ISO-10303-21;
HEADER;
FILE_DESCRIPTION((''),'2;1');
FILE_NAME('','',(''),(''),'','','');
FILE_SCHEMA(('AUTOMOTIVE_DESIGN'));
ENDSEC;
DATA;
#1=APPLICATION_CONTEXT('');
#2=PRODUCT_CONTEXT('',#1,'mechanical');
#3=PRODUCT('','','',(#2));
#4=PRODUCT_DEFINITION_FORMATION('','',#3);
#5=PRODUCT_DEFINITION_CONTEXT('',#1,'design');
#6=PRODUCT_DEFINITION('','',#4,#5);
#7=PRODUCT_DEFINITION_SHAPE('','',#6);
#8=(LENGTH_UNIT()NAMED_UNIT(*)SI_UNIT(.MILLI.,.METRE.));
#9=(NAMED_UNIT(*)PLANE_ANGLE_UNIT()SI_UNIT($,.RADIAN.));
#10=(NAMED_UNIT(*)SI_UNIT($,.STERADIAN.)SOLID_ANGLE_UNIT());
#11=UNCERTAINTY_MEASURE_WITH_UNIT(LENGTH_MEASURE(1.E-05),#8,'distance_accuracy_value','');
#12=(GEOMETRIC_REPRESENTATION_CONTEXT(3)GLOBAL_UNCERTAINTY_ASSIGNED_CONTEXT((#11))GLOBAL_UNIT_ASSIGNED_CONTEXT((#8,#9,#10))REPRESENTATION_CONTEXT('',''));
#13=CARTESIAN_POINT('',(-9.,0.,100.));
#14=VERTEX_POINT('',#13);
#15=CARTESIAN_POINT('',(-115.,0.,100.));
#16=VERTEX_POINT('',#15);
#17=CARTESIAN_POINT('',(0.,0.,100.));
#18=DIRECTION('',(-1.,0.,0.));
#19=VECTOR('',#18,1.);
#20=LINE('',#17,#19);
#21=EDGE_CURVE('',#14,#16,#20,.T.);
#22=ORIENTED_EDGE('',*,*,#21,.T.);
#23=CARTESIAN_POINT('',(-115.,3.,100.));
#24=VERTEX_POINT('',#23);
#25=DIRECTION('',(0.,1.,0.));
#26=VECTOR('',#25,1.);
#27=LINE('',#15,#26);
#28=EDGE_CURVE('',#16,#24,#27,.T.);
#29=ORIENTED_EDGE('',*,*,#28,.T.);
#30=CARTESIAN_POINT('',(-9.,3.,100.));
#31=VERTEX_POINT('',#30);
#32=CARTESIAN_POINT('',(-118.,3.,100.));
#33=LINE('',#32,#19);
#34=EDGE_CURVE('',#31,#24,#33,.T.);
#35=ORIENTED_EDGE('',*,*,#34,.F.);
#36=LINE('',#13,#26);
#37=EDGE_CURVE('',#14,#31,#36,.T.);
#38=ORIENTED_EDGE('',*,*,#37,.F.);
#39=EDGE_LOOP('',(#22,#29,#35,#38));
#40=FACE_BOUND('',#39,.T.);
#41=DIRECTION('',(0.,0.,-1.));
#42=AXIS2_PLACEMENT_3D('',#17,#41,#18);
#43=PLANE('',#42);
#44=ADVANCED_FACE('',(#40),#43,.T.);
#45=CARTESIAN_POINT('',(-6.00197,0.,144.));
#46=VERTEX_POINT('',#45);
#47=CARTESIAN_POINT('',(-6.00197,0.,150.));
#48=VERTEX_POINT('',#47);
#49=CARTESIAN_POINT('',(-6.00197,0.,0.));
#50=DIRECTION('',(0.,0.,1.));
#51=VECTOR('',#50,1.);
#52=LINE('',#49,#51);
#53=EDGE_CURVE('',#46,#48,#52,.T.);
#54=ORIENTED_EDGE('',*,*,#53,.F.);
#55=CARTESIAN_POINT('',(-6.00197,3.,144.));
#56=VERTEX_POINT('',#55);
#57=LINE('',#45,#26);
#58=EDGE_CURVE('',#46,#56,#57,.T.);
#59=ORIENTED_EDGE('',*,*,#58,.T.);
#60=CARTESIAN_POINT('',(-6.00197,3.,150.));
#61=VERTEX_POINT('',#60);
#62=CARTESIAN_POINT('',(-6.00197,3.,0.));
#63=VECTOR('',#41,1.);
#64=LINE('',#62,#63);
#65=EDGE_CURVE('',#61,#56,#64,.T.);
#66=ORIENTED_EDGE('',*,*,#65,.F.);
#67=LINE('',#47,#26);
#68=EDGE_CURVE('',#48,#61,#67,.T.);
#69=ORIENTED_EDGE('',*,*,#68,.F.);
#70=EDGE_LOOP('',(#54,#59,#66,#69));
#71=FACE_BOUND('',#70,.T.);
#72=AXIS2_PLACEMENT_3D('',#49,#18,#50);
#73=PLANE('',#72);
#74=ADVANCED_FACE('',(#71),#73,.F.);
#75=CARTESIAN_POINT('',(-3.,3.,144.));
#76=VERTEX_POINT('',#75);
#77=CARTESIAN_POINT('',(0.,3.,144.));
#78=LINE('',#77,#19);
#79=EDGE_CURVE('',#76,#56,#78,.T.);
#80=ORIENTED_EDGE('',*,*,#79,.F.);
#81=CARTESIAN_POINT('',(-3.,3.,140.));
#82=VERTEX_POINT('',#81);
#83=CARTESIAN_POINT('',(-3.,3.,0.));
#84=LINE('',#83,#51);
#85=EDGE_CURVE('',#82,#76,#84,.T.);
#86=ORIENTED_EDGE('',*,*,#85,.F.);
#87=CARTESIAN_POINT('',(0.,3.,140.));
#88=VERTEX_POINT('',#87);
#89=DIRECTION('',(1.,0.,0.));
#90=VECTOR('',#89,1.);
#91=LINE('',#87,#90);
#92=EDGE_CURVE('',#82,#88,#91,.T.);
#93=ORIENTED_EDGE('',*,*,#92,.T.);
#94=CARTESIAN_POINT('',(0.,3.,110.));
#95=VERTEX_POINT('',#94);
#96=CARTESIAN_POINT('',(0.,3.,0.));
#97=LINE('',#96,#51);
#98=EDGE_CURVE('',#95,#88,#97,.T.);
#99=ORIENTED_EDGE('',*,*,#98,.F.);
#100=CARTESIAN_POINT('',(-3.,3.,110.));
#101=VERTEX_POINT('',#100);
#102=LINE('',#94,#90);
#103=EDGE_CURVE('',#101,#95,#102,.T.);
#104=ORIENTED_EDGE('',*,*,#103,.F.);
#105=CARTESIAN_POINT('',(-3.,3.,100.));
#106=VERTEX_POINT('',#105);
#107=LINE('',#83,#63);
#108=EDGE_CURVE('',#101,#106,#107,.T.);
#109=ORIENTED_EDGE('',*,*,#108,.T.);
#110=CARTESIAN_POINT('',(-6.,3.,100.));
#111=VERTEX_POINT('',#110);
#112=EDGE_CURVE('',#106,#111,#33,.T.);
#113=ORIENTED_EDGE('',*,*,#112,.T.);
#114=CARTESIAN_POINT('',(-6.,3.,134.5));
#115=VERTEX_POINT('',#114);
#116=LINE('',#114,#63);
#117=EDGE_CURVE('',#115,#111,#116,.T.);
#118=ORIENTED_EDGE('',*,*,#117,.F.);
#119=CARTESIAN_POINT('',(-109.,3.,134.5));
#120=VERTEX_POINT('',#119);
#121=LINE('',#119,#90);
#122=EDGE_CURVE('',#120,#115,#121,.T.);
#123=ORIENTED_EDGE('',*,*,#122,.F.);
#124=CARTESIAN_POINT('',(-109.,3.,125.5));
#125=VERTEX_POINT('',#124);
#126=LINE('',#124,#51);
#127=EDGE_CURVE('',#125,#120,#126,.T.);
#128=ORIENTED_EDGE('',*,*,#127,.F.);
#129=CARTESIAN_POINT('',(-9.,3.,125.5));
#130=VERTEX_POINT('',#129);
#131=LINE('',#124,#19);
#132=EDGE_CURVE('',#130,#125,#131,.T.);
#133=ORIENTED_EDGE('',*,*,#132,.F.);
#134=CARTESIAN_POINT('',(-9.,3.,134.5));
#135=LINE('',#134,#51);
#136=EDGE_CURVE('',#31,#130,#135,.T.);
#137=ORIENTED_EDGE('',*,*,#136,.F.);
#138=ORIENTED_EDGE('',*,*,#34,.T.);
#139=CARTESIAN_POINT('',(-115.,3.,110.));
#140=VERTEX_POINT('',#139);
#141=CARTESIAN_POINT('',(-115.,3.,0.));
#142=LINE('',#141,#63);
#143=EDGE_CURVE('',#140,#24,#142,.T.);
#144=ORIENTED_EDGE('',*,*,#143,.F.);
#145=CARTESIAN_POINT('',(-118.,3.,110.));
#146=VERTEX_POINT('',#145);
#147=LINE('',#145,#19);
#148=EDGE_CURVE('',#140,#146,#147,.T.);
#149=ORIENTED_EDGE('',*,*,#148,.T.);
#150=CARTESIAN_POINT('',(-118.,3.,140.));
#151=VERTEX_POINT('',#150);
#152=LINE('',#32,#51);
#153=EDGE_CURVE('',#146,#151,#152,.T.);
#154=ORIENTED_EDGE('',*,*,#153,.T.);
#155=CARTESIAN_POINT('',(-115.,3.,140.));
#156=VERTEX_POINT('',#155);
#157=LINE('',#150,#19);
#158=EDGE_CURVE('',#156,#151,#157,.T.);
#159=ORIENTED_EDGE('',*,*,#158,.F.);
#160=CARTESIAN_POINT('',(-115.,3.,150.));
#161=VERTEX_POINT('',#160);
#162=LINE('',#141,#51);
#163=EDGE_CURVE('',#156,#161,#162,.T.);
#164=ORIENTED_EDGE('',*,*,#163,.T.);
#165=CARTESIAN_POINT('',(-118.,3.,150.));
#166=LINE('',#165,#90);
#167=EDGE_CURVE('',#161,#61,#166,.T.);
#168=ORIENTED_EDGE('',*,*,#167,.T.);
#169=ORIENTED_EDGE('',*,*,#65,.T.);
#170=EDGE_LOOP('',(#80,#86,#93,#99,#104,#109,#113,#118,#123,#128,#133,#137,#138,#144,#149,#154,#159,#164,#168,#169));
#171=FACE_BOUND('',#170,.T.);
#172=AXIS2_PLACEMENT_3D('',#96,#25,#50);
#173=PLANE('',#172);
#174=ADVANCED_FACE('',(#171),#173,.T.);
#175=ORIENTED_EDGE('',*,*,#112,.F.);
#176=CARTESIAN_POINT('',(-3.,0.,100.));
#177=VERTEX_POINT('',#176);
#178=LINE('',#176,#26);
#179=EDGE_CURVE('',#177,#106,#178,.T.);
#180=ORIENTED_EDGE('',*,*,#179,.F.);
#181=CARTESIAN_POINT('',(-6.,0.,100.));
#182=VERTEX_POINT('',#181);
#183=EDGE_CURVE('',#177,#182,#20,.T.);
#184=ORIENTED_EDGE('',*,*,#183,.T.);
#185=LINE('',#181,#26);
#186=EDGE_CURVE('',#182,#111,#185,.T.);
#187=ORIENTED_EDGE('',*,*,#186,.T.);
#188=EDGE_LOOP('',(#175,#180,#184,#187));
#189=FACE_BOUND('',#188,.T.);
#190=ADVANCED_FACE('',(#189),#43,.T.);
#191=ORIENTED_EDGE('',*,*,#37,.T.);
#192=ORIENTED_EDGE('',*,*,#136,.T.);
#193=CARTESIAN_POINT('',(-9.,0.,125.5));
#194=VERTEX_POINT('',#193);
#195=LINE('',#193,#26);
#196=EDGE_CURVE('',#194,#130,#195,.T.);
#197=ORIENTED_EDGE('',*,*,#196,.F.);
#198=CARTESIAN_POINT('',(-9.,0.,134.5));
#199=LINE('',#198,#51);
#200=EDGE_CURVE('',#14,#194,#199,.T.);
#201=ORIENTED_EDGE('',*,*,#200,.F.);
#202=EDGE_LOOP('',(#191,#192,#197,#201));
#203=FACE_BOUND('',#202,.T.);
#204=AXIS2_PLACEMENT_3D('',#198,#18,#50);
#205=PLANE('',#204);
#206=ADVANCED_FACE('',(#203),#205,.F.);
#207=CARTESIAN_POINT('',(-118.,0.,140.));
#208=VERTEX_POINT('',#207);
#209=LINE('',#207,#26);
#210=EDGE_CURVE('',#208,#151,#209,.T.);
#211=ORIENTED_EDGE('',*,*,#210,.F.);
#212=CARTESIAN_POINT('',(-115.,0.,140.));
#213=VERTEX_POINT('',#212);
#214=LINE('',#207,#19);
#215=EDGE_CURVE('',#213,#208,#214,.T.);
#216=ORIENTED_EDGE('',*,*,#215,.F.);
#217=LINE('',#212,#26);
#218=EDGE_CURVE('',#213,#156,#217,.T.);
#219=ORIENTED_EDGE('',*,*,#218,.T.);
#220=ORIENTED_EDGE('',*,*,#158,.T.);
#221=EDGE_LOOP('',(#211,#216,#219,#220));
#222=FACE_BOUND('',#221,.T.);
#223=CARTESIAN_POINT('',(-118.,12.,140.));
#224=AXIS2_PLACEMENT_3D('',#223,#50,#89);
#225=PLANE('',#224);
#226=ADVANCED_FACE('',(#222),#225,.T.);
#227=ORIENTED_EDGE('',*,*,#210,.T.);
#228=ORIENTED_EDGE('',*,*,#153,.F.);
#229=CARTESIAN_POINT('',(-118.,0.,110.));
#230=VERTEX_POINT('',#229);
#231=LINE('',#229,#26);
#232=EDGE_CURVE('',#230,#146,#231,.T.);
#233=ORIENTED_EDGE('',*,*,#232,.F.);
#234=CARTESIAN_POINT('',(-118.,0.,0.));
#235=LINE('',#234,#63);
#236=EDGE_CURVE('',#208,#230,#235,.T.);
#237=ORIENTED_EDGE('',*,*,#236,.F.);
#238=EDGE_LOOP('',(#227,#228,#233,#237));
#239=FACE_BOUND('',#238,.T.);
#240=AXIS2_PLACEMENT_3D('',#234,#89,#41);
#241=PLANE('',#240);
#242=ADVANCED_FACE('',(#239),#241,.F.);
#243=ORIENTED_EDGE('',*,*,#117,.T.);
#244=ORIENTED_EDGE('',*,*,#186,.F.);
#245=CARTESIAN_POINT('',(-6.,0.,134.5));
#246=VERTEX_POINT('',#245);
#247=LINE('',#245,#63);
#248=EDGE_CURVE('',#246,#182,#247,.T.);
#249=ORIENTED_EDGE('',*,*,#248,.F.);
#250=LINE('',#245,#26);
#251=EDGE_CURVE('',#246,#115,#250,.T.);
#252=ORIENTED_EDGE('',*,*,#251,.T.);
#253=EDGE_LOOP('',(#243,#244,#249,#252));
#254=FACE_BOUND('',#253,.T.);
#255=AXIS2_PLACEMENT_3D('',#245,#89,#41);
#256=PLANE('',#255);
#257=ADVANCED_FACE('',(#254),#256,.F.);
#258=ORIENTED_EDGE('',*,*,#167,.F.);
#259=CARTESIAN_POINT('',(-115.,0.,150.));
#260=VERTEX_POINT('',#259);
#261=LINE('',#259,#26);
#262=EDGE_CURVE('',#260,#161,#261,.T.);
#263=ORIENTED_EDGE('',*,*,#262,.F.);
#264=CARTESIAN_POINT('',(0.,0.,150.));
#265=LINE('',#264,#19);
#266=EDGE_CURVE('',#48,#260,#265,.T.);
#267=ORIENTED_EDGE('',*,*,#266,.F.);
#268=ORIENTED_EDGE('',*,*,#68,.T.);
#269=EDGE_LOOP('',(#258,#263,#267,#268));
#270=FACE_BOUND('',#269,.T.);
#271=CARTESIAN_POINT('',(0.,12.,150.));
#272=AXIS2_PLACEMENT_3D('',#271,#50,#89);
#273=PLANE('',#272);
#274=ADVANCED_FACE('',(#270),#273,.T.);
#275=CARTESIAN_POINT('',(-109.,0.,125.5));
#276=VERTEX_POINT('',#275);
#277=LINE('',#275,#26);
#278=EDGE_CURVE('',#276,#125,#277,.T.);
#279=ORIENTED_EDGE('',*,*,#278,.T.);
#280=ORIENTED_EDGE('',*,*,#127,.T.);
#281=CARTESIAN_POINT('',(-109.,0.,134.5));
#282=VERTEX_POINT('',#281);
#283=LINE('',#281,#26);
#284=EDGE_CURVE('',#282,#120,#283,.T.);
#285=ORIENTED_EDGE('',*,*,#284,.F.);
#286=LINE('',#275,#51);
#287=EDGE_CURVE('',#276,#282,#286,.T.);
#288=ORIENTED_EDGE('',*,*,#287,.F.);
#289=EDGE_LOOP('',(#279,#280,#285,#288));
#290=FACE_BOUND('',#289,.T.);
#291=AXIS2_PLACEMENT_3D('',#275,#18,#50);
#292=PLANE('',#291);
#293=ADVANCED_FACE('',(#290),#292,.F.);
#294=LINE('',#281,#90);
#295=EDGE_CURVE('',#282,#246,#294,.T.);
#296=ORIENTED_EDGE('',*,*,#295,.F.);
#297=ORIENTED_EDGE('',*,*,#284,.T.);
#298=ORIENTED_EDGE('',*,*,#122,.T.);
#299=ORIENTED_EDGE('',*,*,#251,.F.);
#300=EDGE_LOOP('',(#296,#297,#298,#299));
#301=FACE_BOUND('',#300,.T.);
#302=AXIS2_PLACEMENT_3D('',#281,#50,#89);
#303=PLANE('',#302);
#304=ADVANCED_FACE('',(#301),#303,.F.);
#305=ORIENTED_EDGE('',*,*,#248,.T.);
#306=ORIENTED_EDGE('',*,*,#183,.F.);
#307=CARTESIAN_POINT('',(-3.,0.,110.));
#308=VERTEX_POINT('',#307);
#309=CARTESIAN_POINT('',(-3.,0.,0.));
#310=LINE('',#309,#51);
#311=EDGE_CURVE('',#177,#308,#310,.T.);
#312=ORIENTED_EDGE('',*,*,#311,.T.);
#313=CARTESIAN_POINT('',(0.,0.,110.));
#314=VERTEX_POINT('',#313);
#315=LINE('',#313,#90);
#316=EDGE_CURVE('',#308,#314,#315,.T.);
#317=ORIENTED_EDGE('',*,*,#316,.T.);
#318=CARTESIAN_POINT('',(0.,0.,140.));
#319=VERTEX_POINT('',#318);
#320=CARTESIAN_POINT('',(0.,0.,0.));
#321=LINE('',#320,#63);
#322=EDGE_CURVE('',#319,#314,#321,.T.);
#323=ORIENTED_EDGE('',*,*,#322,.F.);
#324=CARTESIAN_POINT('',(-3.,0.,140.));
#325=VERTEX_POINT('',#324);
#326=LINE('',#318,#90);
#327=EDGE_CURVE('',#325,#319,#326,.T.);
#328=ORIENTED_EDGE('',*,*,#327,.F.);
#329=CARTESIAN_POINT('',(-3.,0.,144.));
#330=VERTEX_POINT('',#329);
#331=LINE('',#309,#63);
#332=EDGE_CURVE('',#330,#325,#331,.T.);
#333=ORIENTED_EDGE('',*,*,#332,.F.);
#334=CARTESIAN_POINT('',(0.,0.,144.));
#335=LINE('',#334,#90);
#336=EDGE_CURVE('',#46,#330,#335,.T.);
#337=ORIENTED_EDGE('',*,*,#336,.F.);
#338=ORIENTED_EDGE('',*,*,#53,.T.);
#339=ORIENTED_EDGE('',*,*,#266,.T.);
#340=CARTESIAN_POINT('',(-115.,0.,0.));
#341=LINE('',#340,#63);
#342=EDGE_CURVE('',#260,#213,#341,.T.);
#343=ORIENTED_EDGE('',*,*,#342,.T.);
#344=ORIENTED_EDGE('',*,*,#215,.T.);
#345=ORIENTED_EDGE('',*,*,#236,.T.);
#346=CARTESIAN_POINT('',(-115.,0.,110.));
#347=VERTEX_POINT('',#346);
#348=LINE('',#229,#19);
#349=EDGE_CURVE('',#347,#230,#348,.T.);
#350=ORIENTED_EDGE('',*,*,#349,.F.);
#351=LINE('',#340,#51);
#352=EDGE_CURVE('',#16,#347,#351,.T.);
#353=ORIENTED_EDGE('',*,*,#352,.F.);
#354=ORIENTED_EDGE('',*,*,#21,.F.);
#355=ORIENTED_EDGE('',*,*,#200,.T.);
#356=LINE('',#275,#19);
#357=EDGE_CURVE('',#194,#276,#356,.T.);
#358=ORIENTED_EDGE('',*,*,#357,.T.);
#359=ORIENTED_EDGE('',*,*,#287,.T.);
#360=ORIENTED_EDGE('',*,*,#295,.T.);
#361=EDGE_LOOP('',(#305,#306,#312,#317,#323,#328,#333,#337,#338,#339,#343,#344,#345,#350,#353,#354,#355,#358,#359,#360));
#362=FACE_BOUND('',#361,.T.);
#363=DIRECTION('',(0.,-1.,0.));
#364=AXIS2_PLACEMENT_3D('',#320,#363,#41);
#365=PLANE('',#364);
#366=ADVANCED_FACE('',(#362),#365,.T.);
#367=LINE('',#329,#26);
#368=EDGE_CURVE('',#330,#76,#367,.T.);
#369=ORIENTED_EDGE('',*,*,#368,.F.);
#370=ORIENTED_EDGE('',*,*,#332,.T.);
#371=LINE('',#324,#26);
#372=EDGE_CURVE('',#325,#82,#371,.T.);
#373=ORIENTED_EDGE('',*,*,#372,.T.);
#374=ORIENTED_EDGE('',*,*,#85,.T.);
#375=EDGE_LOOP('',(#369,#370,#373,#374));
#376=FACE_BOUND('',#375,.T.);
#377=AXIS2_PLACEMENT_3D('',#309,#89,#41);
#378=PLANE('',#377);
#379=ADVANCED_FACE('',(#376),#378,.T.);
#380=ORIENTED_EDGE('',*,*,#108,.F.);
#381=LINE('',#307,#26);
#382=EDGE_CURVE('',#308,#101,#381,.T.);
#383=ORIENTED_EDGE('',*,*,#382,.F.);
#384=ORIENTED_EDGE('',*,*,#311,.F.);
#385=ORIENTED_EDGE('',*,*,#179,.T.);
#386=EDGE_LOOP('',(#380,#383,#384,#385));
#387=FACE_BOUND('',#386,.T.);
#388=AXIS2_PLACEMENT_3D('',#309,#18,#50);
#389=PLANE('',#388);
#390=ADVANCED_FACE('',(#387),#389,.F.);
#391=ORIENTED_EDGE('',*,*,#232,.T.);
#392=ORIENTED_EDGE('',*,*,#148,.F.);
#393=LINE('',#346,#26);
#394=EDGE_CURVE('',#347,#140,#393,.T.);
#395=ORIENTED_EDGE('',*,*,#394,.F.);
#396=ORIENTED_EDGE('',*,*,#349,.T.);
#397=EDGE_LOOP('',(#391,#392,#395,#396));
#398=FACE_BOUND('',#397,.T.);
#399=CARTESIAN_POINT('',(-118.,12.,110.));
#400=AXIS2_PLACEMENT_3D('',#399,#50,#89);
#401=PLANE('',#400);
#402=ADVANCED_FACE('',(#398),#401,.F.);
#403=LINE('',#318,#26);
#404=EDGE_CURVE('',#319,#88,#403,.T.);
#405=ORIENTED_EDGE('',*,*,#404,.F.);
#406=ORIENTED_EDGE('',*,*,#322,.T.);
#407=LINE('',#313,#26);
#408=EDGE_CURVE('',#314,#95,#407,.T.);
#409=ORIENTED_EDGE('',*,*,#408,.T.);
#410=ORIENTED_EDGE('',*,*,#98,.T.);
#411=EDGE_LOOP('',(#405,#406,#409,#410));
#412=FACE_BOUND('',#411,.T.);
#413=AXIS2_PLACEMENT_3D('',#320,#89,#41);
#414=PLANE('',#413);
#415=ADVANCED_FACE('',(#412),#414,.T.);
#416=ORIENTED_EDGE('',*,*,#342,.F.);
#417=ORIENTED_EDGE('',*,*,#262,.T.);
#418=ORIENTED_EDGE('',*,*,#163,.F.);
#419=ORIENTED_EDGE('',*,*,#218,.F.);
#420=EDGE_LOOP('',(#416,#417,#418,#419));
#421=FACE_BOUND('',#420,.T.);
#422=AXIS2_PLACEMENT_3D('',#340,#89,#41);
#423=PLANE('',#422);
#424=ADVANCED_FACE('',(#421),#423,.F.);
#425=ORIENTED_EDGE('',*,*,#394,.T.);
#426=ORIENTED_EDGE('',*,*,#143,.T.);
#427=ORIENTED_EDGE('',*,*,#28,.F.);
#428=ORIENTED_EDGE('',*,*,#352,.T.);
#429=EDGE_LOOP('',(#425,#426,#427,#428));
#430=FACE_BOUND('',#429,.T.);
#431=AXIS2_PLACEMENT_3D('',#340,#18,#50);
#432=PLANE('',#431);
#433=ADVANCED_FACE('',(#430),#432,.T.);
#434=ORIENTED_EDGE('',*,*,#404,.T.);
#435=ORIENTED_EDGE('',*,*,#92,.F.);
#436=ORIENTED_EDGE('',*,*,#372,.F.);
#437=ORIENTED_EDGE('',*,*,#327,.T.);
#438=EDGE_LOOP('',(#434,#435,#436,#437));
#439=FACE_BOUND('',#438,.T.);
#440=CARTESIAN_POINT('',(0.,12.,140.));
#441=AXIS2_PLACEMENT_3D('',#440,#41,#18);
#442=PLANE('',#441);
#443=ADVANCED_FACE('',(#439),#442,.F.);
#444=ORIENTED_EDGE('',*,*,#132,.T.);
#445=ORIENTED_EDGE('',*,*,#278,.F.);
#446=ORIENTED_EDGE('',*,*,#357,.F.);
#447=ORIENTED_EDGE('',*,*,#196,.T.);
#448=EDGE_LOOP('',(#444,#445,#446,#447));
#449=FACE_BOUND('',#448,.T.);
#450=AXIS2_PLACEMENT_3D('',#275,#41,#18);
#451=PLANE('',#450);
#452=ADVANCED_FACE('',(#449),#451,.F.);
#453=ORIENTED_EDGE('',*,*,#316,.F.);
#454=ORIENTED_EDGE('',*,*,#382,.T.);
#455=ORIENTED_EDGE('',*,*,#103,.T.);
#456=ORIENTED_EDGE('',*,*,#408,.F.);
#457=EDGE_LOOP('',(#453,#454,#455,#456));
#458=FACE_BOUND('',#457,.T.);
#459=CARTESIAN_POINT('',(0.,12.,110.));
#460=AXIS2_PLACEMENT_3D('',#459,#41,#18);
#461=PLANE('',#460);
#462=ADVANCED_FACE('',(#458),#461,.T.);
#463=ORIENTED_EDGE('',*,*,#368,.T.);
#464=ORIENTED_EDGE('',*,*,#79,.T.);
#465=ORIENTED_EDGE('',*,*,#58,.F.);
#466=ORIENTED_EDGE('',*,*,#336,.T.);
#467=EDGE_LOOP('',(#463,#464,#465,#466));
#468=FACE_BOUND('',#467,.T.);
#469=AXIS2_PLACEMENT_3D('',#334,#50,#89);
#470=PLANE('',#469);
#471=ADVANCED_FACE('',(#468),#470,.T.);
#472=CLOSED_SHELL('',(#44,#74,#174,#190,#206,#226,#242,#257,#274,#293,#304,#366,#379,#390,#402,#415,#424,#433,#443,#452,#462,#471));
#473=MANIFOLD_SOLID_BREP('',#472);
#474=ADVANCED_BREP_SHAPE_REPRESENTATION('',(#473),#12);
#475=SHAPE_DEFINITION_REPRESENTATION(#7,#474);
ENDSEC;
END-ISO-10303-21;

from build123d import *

# Parameters (mm, degrees)
LED_1_START         = 100
LED_1_OUTLINE_W     = 112
LED_1_OUTLINE_H     = 3
LED_1_DEPTH         = 25.5
LED_1_START_2       = 134.5
LED_1_2_OUTLINE_W   = 108.998029847
LED_1_2_OUTLINE_H   = 3
LED_1_2_DEPTH       = 15.5
LED_1_START_3       = 110
LED_1_3_OUTLINE_W   = 9
LED_1_3_OUTLINE_H   = 3
LED_1_3_DEPTH       = 30
LED_1_START_4       = 140
LED_1_4_OUTLINE_W   = 3.001970153
LED_1_4_OUTLINE_H   = 3
LED_1_4_DEPTH       = 4
SKETCH_1_W          = 3
SKETCH_1_H          = 34.5
CUT_EXTRUDE_1_DEPTH = 3


# Read off the part's stored shape, not the designer's step: 基体零件-LED限位板-1
with BuildPart() as part:
    # 基体零件-LED限位板-1 outline → 基体零件-LED限位板-1 (new body)
    with BuildSketch(Plane.XY.offset(LED_1_START)):
        with Locations((-59, 1.5)):
            Rectangle(LED_1_OUTLINE_W, LED_1_OUTLINE_H)
    extrude(amount=LED_1_DEPTH)



with BuildPart() as body_2:
    # LED_-1 2 outline → LED_-1 2 (new body)
    with BuildSketch(Plane.XY.offset(LED_1_START_2)):
        with Locations((-60.500985077, 1.5)):
            Rectangle(LED_1_2_OUTLINE_W, LED_1_2_OUTLINE_H)
    extrude(amount=LED_1_2_DEPTH)


with BuildPart() as part_1:
    add(part.part)

    add(body_2.part)  # LED_-1 3 merges body 2
    # LED_-1 3 outline → LED_-1 3 (add)
    with BuildSketch(Plane.XY.offset(LED_1_START_3)):
        with Locations((-113.5, 1.5)):
            Rectangle(LED_1_3_OUTLINE_W, LED_1_3_OUTLINE_H)
        with Locations((-4.5, 1.5)):
            Rectangle(LED_1_3_OUTLINE_W, LED_1_3_OUTLINE_H)
    extrude(amount=LED_1_3_DEPTH)

    # LED_-1 4 outline → LED_-1 4 (add)
    with BuildSketch(Plane.XY.offset(LED_1_START_4)):
        with Locations((-4.500985077, 1.5)):
            Rectangle(LED_1_4_OUTLINE_W, LED_1_4_OUTLINE_H)
    extrude(amount=LED_1_4_DEPTH)

    # 草图1 → 切除-拉伸1 (cut)
    with BuildSketch(Plane(origin=(0, 3, 0), x_dir=(1, 0, 0), z_dir=(0, 1, 0))):
        with Locations((-7.5, -117.25)):
            Rectangle(SKETCH_1_W, SKETCH_1_H)
    extrude(amount=-CUT_EXTRUDE_1_DEPTH, mode=Mode.SUBTRACT)


solid = part_1.part
